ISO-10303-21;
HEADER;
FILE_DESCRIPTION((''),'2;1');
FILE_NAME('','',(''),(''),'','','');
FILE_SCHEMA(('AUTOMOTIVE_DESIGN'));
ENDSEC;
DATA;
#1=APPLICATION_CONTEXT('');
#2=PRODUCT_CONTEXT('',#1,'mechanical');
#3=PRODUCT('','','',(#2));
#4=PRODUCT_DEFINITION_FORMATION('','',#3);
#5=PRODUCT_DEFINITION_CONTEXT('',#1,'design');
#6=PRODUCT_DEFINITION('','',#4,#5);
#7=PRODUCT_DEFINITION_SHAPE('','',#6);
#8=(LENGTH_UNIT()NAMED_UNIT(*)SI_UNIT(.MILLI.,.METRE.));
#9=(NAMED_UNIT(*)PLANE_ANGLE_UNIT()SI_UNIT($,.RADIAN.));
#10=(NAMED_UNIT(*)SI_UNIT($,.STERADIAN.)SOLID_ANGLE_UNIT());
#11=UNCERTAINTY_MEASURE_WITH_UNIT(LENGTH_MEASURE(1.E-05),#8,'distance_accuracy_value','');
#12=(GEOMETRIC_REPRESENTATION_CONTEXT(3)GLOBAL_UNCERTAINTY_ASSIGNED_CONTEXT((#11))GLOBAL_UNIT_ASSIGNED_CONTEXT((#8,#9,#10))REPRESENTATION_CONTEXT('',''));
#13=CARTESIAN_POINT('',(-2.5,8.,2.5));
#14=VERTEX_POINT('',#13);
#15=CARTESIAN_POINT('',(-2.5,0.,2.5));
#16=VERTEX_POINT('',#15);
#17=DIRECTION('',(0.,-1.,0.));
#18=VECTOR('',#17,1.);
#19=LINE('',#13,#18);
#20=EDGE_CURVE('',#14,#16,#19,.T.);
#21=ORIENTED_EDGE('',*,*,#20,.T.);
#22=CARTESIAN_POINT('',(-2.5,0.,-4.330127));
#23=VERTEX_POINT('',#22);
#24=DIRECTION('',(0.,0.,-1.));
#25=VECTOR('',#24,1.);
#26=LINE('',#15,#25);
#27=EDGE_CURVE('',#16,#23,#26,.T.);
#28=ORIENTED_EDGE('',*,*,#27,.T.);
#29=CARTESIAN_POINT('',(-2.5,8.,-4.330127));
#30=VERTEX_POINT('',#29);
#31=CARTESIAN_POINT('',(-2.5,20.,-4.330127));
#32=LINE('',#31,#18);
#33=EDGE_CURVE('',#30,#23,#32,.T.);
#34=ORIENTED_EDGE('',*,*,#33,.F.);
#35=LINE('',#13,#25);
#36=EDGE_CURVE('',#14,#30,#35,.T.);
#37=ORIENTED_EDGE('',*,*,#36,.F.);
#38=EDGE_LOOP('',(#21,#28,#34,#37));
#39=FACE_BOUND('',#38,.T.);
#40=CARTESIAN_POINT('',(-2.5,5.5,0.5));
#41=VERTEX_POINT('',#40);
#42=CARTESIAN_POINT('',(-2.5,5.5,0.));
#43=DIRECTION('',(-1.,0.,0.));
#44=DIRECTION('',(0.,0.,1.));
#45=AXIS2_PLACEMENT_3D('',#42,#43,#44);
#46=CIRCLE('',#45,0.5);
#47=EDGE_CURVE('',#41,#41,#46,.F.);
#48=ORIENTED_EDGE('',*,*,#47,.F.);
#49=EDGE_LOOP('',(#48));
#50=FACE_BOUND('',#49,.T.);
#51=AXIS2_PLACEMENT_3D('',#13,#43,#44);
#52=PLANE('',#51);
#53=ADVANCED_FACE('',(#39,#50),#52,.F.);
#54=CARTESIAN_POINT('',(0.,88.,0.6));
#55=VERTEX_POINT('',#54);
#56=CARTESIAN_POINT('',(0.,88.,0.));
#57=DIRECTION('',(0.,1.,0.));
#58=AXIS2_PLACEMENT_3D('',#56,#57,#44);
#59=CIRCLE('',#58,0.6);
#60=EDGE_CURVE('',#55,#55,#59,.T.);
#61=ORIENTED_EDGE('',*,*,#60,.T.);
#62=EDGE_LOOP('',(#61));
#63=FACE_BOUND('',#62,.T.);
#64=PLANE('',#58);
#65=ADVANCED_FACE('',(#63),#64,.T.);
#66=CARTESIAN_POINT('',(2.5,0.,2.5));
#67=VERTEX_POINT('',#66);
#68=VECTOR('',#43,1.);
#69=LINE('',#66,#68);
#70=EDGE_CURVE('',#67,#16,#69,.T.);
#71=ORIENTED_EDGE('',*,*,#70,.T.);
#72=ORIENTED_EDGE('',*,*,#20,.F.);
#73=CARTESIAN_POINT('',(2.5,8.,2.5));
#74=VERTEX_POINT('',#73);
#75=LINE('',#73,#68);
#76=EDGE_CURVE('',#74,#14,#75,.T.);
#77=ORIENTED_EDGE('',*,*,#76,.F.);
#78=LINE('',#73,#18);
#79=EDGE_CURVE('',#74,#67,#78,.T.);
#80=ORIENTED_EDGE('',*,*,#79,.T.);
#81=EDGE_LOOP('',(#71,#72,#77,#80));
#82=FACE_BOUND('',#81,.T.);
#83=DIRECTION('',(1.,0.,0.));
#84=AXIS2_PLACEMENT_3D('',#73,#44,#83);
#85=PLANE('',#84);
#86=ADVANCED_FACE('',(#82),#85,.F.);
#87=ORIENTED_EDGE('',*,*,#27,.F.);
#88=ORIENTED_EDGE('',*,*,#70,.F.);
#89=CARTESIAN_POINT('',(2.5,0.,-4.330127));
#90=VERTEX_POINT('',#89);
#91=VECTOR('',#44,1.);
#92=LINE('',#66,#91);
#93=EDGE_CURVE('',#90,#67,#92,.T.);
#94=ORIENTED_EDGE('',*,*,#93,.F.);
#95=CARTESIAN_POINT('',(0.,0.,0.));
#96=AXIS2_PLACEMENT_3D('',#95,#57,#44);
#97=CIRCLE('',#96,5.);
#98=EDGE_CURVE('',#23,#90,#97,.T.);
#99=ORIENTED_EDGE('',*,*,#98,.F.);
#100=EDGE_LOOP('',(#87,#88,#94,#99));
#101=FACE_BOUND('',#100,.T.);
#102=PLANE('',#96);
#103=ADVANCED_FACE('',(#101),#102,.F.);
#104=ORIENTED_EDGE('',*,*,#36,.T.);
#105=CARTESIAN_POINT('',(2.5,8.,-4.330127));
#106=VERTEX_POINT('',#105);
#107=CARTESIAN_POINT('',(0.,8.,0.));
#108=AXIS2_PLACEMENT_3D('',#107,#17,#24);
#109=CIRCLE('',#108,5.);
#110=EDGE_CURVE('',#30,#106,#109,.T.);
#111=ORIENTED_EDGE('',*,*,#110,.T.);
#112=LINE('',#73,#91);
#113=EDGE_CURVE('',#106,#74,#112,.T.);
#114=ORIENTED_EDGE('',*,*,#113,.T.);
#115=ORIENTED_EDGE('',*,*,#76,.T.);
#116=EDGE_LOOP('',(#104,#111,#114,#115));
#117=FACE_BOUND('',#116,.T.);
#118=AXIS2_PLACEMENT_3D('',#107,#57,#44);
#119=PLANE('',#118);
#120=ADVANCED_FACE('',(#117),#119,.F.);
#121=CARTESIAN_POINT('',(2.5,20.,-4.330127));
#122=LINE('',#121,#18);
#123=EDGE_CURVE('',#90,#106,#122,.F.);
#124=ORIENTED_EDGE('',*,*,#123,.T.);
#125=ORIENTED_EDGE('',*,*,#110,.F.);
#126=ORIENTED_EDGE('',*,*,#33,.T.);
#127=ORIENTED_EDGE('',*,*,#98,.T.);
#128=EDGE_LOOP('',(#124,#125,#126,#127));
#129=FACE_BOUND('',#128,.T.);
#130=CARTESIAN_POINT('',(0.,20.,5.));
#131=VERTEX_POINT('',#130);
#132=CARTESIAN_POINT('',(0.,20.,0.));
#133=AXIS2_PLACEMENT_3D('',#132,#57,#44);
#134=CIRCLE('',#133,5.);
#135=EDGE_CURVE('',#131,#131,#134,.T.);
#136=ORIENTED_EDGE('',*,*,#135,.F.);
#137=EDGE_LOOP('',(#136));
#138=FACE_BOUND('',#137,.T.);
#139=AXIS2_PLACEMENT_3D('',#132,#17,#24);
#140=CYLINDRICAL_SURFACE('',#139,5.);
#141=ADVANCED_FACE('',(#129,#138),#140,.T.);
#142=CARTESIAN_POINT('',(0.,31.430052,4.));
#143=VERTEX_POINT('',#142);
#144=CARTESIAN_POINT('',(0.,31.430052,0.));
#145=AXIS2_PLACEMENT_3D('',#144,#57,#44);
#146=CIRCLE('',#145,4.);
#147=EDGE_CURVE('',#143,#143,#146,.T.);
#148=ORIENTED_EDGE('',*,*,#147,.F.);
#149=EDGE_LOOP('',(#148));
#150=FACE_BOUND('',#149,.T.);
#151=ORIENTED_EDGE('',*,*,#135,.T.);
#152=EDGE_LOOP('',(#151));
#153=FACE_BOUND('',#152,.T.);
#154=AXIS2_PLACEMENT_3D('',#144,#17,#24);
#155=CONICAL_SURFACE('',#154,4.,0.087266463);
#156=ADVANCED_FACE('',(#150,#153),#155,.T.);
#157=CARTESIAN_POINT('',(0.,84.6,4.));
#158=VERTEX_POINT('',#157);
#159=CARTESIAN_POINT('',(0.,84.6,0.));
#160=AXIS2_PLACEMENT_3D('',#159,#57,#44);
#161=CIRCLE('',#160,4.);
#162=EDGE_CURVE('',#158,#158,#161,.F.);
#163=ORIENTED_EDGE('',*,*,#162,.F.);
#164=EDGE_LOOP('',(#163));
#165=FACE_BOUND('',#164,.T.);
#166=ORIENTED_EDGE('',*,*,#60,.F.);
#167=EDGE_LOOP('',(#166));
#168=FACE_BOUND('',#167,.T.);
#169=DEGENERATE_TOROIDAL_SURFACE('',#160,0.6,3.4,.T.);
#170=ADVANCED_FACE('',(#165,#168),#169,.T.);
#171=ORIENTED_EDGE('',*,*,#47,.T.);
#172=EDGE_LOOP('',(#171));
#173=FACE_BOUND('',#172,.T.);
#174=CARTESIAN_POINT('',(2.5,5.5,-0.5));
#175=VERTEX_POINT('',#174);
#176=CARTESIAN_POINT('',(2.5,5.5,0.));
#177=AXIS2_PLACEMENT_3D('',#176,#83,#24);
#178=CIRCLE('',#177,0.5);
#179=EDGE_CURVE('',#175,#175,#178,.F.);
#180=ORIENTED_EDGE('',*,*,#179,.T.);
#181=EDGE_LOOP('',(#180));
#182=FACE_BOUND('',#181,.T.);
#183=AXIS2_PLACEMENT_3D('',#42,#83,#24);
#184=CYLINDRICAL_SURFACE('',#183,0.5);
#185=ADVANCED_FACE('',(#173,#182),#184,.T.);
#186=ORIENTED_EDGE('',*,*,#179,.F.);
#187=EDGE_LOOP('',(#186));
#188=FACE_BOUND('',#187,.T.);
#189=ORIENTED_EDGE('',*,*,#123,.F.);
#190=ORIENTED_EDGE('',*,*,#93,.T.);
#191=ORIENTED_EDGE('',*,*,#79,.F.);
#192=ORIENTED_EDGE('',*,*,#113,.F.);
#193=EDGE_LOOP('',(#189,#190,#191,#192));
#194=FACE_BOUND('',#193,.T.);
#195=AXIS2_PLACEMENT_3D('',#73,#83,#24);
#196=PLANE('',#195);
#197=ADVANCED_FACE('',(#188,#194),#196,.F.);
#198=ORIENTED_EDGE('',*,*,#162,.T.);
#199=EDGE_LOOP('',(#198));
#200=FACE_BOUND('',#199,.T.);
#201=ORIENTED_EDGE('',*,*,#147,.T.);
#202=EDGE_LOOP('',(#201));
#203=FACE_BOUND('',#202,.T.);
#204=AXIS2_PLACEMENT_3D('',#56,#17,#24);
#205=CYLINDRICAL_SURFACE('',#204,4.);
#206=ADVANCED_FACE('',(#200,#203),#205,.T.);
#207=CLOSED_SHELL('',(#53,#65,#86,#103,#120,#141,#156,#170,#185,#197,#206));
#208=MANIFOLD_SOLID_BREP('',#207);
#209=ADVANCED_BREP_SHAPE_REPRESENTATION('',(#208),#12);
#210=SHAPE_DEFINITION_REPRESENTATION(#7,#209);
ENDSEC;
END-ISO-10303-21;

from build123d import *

# Parameters (mm, degrees)
SKETCH1_R           = 5
BOSS_EXTRUDE1_DEPTH = 20
SKETCH2_R           = 4
BOSS_EXTRUDE2_DEPTH = 68
FILLET1_R           = 3.4
CHAMFER1_SIZE       = 11.430052303
CHAMFER1_SIZE_2     = 1
SKETCH3_W           = 5
SKETCH3_H           = 5
CUT_EXTRUDE1_DEPTH  = 8
SKETCH4_W           = 5
SKETCH4_H           = 2.702388579
CUT_EXTRUDE2_DEPTH  = 8
SKETCH5_R           = 0.5
BOSS_EXTRUDE3_DEPTH = 5


with BuildPart() as part:
    # Sketch1 → Boss-Extrude1 (new body)
    with BuildSketch(Plane(origin=(0, 0, 0), x_dir=(1, 0, 0), z_dir=(0, 1, 0))):
        with Locations(Location((0, 0, 0), (0, 0, 270))):
            Circle(SKETCH1_R)
    extrude(amount=BOSS_EXTRUDE1_DEPTH)

    # Sketch2 → Boss-Extrude2 (add)
    with BuildSketch(Plane(origin=(0, 20, 0), x_dir=(1, 0, 0), z_dir=(0, 1, 0))):
        with Locations(Location((0, 0, 0), (0, 0, 270))):
            Circle(SKETCH2_R)
    extrude(amount=BOSS_EXTRUDE2_DEPTH)

    # Fillet1
    fillet1_edges = [part.edges().sort_by_distance(p)[0] for p in [
        (0, 88, -4),
    ]]
    fillet(fillet1_edges, radius=FILLET1_R)

    # Chamfer1
    # the kernel refuses this chamfer: 11.430052303, 1 mm, written as the material it adds along each edge
    with BuildSketch(Plane(origin=(0, 20, 0), x_dir=(0, 0, 1), z_dir=(-1, 0, 0))) as chamfer1_piece_1_section:
        Polygon((4, CHAMFER1_SIZE), (4 + CHAMFER1_SIZE_2, 0), (4, 0), align=None)
    chamfer1_piece_1 = revolve(axis=Axis((0, 20, 0), (0, 1, 0)), mode=Mode.PRIVATE)
    chamfer1_piece_1 = chamfer1_piece_1 & Plane(origin=(0, 25.937398898, 0), x_dir=(0, 0, 1), z_dir=(0, -1, 0)) * Cylinder(5, 46, mode=Mode.PRIVATE)
    add(chamfer1_piece_1)

    # Sketch3 → Cut-Extrude1 (cut)
    with BuildSketch(Plane(origin=(0, 0, 0), x_dir=(-1, 0, 0), z_dir=(0, -1, 0))):
        Rectangle(SKETCH3_W, SKETCH3_H)
    extrude(amount=-CUT_EXTRUDE1_DEPTH, mode=Mode.SUBTRACT)

    # Sketch4 → Cut-Extrude2 (cut)
    with BuildSketch(Plane(origin=(0, 0, 0), x_dir=(-1, 0, 0), z_dir=(0, -1, 0))):
        with Locations((0, 3.851194289)):
            Rectangle(SKETCH4_W, SKETCH4_H)
    extrude(amount=-CUT_EXTRUDE2_DEPTH, mode=Mode.SUBTRACT)

    # Sketch5 → Boss-Extrude3 (add)
    with BuildSketch(Plane.ZY.offset(-2.5)):
        with Locations(Location((0, 5.5, 0), (0, 0, 180))):
            Circle(SKETCH5_R)
    extrude(amount=BOSS_EXTRUDE3_DEPTH)


solid = part.part
